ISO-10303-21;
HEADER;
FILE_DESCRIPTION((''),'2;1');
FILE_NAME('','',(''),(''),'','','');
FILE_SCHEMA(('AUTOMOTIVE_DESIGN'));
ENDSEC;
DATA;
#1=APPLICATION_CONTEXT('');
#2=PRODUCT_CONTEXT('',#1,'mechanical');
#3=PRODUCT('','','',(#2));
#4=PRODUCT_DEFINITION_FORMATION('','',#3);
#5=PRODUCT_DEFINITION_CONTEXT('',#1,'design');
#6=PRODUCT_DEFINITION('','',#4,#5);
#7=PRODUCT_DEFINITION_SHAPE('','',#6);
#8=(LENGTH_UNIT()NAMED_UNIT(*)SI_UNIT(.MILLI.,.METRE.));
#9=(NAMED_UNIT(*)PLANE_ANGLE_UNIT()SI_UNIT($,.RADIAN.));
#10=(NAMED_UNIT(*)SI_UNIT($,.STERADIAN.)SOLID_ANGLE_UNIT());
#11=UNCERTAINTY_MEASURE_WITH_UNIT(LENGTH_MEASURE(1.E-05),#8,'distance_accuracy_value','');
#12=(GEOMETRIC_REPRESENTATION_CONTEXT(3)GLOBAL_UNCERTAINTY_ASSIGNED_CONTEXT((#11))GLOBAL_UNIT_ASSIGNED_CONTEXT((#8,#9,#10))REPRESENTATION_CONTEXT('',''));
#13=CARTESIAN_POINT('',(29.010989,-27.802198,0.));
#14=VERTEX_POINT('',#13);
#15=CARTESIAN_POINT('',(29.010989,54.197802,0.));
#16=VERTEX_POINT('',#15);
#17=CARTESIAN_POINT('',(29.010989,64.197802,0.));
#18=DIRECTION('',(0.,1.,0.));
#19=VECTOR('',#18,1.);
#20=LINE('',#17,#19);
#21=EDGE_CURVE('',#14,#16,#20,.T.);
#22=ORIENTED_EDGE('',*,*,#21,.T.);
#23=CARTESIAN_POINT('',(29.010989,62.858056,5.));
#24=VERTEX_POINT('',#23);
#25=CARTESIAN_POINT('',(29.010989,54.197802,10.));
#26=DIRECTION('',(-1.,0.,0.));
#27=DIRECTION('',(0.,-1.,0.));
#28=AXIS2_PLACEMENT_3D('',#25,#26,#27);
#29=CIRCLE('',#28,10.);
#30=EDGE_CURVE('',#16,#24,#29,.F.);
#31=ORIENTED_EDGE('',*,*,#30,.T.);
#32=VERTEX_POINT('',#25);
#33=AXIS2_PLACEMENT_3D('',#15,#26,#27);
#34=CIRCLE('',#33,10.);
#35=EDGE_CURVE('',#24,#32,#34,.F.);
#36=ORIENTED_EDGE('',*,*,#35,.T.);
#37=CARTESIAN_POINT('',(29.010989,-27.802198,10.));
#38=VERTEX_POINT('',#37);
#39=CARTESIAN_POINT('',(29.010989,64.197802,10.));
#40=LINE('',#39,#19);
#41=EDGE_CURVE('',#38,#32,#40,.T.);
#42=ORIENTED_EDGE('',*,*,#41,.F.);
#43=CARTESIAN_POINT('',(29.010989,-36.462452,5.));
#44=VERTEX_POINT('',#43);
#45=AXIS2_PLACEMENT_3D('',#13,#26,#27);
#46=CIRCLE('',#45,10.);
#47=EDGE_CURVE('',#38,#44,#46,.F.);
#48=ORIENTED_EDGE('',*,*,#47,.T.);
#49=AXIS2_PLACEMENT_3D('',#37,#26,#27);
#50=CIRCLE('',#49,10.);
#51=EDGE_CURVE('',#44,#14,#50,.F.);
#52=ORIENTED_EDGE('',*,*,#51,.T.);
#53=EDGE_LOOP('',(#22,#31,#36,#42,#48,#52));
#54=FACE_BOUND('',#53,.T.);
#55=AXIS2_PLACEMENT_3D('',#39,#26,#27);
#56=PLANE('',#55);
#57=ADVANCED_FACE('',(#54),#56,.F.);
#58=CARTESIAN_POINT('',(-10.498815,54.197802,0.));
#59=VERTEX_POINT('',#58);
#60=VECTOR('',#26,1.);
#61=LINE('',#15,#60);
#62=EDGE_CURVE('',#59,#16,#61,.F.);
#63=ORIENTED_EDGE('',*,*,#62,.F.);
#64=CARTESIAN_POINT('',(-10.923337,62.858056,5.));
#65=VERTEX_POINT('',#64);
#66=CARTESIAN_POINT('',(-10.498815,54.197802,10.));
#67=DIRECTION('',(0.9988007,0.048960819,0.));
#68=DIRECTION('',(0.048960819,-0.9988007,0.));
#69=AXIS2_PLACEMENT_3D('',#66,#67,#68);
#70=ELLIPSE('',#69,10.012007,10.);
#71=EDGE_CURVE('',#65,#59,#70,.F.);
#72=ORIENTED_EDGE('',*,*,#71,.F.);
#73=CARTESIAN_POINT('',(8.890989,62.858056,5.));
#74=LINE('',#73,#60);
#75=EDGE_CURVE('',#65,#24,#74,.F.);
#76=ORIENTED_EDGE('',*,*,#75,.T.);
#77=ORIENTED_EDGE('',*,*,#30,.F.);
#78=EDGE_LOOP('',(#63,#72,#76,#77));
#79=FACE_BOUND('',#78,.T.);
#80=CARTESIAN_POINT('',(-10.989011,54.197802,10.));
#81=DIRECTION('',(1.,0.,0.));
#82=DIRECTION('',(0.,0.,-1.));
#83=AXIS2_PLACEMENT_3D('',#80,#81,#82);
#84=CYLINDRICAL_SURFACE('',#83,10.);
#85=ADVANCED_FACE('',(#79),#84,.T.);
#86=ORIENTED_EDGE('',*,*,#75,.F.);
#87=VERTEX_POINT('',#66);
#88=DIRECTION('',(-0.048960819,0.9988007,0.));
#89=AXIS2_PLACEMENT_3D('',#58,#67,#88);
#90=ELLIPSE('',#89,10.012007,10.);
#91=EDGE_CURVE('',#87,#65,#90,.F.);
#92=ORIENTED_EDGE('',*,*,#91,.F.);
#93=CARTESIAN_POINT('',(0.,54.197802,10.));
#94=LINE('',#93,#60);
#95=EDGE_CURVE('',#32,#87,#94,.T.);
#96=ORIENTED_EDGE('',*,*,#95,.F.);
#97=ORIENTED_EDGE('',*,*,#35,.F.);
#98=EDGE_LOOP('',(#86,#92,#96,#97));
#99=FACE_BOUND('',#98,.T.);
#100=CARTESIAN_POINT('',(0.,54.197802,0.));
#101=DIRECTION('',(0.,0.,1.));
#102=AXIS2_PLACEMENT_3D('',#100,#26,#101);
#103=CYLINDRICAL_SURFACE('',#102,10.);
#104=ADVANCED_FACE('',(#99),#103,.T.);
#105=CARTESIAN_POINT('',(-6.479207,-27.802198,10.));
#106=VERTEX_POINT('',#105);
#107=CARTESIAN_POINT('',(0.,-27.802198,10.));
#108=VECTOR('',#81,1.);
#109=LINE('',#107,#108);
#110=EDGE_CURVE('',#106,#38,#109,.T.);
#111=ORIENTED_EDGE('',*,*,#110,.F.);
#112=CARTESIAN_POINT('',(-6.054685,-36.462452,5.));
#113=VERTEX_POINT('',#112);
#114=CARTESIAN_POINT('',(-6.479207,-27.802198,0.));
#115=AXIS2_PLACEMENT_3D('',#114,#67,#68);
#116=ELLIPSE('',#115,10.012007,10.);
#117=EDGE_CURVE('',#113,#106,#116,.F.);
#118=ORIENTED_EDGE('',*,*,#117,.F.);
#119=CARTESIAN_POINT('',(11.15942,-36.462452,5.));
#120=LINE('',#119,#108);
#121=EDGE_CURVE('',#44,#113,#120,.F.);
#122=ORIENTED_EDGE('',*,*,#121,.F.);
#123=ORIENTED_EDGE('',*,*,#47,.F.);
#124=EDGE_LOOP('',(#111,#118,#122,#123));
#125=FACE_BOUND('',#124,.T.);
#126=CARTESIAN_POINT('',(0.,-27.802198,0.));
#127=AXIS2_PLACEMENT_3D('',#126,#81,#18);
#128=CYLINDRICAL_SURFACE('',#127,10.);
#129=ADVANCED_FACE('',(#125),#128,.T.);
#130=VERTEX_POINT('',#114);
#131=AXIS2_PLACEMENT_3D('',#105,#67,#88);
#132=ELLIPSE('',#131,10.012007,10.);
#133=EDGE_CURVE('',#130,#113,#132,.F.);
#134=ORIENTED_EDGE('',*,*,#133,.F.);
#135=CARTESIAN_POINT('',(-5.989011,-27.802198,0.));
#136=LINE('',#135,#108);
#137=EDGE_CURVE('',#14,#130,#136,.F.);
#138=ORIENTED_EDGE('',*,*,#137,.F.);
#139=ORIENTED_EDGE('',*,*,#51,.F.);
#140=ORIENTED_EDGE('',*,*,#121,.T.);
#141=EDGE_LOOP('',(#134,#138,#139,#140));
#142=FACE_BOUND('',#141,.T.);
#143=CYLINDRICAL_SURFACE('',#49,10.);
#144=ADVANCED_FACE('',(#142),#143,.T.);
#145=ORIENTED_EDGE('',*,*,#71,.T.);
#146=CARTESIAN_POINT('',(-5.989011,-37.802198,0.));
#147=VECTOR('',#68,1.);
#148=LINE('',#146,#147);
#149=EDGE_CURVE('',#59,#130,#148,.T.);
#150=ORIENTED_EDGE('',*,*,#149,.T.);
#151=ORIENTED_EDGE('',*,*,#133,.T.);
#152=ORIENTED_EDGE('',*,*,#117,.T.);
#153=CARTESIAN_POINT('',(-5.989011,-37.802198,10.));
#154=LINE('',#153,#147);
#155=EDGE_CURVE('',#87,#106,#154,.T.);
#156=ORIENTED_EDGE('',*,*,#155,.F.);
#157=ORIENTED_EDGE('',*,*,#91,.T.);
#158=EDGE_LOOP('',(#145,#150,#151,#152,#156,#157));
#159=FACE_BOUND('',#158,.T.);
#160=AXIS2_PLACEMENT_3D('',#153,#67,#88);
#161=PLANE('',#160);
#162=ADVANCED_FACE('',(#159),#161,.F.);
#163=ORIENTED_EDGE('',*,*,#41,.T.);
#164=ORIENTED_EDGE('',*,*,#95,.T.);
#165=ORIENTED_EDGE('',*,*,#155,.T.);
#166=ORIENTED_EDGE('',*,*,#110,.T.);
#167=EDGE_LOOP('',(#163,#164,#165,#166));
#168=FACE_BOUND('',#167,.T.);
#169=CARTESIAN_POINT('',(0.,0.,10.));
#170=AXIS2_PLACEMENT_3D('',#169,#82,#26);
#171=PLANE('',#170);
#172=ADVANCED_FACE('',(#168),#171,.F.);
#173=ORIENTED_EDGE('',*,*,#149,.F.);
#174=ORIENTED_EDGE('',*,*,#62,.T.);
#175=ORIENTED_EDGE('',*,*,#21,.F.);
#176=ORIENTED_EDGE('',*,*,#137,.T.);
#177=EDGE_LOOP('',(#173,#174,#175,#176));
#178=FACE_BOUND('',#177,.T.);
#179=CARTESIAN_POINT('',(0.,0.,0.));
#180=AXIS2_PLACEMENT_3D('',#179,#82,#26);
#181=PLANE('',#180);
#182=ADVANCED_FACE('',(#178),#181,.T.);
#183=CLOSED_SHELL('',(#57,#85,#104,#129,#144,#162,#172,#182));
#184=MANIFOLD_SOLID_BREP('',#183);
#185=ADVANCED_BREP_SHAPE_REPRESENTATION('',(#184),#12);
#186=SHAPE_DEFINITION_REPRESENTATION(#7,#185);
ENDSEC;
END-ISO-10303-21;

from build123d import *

# Parameters (mm, degrees)
BOSS_EXTRUDE1_DEPTH = 10
FILLET1_R           = 10
FILLET2_R           = 10


with BuildPart() as part:
    # Sketch2 → Boss-Extrude1 (new body)
    with BuildSketch(Plane.XY):
        Polygon((-10.989010989, 64.197802198), (29.010989011, 64.197802198), (29.010989011, -37.802197802), (-5.989010989, -37.802197802), align=None)
    extrude(amount=BOSS_EXTRUDE1_DEPTH)

    # Fillet1
    # the kernel refuses this fillet: 10 mm, written as the material it takes off along each edge
    with BuildSketch(Plane(origin=(-35.989010989, 64.197802198, 0), x_dir=(0, 0, 1), z_dir=(1, 0, 0))) as fillet1_piece_1:
        with BuildLine():
            CenterArc((FILLET1_R, FILLET1_R), FILLET1_R, 180, 90)
            Line((0, FILLET1_R), (0, 0))
            Line((0, 0), (FILLET1_R, 0))
        make_face()
    extrude(amount=90, mode=Mode.SUBTRACT)
    with BuildSketch(Plane(origin=(-35.989010989, 64.197802198, 10), x_dir=(0, 0, -1), z_dir=(1, 0, 0))) as fillet1_piece_2:
        with BuildLine():
            CenterArc((FILLET1_R, -FILLET1_R), FILLET1_R, 90, 90)
            Line((0, -FILLET1_R), (0, 0))
            Line((0, 0), (FILLET1_R, 0))
        make_face()
    extrude(amount=90, mode=Mode.SUBTRACT)

    # Fillet2
    # the kernel refuses this fillet: 10 mm, written as the material it takes off along each edge
    with BuildSketch(Plane(origin=(54.010989011, -37.802197802, 0), x_dir=(0, 0, 1), z_dir=(-1, 0, 0)), Plane(origin=(54.010989011, -37.802197802, 10), x_dir=(0, 1, 0), z_dir=(-1, 0, 0))) as fillet2_piece_1:
        with BuildLine():
            CenterArc((FILLET2_R, FILLET2_R), FILLET2_R, 180, 90)
            Line((0, FILLET2_R), (0, 0))
            Line((0, 0), (FILLET2_R, 0))
        make_face()
    extrude(amount=85, mode=Mode.SUBTRACT)


solid = part.part
